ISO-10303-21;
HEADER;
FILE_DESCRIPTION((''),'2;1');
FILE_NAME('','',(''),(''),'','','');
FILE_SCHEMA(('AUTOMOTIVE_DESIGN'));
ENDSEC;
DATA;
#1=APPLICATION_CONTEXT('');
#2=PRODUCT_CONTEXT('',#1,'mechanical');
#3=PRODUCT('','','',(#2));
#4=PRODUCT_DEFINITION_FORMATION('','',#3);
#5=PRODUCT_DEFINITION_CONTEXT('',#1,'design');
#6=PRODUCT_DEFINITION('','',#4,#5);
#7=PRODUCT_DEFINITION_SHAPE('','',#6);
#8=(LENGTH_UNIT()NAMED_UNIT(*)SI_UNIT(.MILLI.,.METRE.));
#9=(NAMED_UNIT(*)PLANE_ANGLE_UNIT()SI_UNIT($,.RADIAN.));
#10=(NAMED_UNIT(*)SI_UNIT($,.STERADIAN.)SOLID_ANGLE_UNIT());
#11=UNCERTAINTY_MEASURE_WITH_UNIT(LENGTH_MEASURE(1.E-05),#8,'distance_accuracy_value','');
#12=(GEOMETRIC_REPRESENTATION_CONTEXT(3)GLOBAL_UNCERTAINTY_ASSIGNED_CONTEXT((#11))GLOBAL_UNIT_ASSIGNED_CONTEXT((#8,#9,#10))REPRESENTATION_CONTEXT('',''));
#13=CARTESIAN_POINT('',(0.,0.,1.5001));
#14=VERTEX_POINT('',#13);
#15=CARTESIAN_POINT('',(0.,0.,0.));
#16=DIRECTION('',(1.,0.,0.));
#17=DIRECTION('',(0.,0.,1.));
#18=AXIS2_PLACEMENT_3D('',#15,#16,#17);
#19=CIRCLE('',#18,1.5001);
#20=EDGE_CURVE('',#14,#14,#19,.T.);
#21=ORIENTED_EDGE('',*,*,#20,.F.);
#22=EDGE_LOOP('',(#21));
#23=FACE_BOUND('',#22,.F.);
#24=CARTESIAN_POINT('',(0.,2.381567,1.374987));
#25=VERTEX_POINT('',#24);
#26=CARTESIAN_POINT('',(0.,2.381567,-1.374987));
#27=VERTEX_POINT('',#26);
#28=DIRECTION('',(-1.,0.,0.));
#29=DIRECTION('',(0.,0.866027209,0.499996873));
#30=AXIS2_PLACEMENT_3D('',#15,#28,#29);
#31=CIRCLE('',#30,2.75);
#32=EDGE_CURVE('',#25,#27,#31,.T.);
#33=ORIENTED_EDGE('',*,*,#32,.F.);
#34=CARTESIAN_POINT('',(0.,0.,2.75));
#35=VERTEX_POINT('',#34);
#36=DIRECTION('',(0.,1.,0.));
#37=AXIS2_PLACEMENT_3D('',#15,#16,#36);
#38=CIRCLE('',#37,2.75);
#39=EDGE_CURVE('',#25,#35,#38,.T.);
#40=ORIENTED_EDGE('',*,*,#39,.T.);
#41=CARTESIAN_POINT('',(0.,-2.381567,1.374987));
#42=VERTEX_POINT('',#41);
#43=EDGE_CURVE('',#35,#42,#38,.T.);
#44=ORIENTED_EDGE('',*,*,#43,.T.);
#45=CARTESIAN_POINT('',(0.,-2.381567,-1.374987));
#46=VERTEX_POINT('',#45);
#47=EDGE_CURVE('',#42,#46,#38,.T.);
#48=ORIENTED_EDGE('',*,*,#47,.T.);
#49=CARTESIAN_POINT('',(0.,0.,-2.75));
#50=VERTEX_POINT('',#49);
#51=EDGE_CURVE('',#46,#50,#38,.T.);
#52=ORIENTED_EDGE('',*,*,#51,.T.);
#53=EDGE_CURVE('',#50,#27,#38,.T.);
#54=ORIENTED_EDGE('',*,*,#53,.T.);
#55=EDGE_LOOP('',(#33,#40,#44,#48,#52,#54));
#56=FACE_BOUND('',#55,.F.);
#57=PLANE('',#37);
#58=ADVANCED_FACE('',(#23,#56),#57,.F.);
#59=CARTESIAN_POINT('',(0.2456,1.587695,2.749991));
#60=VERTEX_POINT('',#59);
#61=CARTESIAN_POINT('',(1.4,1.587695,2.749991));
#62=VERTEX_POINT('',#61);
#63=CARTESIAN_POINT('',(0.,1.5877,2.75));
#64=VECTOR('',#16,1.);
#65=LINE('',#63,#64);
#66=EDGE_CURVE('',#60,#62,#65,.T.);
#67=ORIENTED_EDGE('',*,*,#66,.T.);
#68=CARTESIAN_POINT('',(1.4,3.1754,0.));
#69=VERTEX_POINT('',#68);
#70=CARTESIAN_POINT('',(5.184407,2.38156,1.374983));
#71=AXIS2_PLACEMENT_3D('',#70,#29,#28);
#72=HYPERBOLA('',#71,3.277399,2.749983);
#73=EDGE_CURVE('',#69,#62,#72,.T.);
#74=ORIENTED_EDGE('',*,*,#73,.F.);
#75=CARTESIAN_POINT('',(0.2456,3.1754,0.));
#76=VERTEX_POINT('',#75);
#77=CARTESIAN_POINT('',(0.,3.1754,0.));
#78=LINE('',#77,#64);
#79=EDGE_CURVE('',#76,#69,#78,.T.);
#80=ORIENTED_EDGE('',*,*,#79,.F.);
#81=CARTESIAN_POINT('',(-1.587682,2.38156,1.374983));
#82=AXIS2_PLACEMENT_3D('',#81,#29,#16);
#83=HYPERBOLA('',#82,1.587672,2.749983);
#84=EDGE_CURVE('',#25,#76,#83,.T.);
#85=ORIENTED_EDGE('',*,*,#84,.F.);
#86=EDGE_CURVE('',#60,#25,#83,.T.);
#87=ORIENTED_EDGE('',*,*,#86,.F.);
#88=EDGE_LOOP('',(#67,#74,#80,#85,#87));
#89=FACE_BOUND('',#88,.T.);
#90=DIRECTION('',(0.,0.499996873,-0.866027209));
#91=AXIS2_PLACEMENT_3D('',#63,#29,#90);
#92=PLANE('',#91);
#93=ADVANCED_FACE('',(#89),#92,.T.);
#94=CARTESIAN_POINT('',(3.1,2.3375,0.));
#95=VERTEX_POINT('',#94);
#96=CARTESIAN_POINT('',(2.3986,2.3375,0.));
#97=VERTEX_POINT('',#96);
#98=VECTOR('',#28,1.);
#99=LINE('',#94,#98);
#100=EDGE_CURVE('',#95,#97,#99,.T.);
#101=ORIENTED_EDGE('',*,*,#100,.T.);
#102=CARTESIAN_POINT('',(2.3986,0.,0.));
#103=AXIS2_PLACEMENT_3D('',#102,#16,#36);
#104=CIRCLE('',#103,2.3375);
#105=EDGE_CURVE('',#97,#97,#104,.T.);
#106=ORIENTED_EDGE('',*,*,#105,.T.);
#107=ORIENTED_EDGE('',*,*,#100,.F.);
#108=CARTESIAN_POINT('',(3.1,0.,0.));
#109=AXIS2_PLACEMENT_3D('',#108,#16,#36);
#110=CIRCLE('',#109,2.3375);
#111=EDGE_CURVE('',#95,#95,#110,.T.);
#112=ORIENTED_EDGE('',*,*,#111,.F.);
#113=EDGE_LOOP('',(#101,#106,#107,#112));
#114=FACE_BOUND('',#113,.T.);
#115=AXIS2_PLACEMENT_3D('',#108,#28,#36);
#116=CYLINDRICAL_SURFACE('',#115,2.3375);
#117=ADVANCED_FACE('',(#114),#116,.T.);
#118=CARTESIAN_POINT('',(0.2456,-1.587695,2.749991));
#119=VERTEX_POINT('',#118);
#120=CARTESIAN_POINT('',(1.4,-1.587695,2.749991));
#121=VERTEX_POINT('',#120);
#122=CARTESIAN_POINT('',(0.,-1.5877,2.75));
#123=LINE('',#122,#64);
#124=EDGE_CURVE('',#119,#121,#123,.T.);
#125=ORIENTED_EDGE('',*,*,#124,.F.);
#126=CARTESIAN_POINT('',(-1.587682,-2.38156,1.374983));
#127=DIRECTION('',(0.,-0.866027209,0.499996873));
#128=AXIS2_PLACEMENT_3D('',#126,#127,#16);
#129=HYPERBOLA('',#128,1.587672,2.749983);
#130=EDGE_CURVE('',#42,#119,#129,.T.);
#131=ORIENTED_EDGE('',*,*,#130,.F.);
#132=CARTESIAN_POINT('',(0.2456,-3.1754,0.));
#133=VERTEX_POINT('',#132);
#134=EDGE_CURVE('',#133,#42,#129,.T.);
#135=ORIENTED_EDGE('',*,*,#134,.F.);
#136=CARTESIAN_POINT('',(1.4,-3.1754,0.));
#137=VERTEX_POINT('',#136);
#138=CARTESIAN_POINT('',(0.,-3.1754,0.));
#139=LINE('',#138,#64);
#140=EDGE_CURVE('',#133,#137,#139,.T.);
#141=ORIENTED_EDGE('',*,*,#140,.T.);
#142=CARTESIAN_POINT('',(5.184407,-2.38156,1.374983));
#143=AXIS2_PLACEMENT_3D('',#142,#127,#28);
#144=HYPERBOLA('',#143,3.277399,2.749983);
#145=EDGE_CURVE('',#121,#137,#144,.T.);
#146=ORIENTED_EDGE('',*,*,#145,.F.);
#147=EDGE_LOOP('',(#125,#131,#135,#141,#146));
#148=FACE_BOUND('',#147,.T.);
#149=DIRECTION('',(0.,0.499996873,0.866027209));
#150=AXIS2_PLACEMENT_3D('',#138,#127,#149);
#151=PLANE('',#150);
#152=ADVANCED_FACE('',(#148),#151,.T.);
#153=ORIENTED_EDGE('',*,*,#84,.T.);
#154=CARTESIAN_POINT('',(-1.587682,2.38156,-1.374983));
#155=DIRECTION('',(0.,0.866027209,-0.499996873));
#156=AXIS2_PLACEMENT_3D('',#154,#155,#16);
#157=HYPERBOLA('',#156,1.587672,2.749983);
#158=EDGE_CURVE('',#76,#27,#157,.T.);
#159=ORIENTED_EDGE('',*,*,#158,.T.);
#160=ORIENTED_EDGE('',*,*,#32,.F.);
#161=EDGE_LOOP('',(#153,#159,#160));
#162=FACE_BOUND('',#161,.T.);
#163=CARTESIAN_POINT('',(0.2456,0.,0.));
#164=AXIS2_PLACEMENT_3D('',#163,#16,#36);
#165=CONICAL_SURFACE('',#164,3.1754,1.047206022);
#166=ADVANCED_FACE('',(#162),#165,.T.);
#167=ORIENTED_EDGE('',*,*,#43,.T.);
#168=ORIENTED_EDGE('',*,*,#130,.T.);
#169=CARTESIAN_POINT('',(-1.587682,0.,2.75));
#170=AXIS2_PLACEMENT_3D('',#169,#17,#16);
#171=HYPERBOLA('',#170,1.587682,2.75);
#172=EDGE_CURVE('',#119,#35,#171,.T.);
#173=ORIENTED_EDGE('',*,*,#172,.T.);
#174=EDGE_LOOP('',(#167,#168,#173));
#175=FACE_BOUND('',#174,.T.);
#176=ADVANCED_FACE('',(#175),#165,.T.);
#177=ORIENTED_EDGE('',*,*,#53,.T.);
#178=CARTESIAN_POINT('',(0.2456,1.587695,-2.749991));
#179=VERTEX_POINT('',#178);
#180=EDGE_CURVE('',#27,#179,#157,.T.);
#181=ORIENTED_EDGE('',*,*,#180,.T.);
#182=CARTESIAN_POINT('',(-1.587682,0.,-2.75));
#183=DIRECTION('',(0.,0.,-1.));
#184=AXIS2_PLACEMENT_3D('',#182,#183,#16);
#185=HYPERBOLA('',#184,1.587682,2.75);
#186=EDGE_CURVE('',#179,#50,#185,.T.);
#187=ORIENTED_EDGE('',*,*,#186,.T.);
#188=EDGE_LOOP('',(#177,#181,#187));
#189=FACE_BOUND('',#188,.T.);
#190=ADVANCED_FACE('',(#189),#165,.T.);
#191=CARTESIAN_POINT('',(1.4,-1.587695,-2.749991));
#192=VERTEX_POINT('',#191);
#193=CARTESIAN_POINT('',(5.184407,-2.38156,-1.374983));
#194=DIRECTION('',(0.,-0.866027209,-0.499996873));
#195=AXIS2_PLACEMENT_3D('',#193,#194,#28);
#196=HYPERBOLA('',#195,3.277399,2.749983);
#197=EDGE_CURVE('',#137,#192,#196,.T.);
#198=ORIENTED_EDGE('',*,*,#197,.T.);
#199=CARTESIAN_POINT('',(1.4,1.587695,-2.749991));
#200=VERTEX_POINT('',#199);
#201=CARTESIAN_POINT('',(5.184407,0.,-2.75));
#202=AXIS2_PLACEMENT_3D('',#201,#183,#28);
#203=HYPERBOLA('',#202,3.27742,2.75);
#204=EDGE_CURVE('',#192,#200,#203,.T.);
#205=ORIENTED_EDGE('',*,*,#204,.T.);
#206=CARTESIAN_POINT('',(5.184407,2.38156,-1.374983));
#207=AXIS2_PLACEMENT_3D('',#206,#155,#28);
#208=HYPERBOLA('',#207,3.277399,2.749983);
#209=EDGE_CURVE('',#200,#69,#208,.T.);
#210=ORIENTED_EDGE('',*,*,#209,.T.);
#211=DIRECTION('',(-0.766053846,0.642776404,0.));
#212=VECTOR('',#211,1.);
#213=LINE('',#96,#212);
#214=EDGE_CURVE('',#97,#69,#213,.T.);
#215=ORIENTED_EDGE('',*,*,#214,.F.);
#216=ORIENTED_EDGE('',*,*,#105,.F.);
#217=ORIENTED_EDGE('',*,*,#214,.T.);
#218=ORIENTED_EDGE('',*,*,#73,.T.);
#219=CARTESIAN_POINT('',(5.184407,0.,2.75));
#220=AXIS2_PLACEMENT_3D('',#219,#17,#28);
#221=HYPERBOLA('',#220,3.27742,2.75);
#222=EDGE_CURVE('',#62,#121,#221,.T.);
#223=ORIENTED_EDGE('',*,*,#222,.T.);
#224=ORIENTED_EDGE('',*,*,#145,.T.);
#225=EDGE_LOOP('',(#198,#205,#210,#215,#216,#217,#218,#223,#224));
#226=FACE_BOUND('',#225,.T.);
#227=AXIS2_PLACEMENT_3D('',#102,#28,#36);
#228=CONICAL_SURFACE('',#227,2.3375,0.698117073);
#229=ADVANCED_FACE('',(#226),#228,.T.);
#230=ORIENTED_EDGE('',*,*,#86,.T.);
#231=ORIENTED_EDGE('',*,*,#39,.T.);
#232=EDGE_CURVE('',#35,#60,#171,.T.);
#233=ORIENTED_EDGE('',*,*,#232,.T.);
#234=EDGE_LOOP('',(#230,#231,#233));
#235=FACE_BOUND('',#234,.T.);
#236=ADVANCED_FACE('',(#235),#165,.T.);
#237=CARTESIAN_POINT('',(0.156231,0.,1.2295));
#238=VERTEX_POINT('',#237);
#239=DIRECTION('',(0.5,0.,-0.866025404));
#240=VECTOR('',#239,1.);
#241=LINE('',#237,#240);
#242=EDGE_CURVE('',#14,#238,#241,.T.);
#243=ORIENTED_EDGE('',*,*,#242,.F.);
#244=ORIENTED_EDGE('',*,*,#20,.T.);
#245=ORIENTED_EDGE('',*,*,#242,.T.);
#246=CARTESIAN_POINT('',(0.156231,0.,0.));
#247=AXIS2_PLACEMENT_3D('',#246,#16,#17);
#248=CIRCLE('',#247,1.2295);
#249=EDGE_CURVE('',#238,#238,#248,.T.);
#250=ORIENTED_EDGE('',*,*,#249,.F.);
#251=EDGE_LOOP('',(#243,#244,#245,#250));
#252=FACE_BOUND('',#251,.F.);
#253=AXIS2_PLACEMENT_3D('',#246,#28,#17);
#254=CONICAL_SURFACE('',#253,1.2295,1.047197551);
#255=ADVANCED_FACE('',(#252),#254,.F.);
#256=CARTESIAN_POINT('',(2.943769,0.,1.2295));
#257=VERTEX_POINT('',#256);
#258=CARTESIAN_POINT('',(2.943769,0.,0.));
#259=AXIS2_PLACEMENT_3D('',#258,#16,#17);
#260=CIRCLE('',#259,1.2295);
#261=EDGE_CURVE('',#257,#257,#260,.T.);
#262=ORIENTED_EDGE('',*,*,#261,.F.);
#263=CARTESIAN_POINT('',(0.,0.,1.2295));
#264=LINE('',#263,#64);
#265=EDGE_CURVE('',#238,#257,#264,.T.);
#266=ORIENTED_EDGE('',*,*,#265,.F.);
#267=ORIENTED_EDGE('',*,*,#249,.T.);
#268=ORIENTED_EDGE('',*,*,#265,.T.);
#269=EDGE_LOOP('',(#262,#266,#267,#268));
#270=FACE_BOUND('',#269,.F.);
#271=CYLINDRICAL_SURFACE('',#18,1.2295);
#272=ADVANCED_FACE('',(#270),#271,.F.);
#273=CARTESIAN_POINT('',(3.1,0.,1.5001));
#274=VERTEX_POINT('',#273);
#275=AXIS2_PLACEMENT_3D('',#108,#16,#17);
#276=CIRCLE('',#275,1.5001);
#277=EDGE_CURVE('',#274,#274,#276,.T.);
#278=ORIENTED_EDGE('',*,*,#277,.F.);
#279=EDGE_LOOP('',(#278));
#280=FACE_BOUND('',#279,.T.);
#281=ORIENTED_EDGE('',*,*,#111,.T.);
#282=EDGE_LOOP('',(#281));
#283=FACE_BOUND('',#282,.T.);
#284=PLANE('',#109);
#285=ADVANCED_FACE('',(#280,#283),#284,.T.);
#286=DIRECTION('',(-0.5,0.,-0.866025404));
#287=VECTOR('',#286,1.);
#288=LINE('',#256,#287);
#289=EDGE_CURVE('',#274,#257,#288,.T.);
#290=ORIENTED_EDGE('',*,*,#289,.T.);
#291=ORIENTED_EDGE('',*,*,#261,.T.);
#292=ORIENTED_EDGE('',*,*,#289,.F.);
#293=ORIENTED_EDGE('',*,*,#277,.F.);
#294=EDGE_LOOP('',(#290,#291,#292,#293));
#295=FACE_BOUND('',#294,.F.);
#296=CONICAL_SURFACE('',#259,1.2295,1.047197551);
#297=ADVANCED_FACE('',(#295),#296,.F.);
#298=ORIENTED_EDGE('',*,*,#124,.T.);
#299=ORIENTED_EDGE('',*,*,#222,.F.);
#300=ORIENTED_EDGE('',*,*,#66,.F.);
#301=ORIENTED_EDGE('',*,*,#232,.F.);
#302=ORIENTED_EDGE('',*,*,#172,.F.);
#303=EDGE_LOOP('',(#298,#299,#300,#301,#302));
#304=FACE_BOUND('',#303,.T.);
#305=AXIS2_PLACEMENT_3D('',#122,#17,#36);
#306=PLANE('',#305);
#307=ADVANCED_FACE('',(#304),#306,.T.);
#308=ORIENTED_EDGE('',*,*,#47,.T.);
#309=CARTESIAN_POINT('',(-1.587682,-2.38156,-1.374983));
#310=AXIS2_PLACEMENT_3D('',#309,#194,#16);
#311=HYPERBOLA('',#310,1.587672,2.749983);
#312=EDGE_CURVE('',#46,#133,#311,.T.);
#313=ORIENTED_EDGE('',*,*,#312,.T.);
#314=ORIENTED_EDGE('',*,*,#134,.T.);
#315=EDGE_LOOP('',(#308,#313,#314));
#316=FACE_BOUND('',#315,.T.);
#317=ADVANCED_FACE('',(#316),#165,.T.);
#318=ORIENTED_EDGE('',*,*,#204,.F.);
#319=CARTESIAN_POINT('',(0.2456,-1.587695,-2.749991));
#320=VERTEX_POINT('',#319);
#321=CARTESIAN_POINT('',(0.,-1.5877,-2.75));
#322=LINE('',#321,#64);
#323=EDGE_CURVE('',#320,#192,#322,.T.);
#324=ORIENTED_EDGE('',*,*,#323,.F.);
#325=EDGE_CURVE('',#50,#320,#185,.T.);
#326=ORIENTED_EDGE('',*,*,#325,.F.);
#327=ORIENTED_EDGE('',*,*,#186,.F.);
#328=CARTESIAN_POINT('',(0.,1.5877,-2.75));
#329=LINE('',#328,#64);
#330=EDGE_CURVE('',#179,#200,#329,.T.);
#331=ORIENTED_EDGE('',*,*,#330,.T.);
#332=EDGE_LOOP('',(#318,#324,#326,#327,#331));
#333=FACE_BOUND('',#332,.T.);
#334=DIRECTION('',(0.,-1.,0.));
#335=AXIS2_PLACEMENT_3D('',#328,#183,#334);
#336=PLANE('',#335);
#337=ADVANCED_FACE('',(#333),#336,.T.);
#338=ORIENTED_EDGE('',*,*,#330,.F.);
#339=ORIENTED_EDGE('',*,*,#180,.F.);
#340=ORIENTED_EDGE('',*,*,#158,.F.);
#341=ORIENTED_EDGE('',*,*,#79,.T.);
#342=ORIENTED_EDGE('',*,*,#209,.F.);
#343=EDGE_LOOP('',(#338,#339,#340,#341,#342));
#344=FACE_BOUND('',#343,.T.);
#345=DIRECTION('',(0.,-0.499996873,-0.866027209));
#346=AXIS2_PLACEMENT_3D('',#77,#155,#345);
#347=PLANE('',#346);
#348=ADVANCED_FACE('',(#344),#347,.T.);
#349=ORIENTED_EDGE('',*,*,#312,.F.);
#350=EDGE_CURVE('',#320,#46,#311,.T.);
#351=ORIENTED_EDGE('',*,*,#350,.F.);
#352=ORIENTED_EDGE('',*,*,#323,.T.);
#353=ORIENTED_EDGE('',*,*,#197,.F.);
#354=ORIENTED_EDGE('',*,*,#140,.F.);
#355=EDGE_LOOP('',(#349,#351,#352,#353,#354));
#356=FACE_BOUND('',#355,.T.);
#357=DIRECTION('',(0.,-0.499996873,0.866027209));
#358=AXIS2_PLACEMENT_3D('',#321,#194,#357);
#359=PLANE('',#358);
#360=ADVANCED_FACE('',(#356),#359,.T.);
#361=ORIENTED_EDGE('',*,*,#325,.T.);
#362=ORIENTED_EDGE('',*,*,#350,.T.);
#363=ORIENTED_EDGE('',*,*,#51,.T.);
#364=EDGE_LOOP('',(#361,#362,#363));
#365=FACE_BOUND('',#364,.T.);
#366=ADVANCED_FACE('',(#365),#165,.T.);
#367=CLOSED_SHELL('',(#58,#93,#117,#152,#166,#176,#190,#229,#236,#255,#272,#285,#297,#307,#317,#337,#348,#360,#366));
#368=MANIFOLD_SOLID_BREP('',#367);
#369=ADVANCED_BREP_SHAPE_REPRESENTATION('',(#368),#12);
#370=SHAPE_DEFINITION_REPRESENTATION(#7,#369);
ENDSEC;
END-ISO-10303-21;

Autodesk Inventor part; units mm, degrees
ref_plane "YZ Plane" through (0, 0, 0) normal (1, 0, 0) x (0, 1, 0)
ref_plane "XZ Plane" through (0, 0, 0) normal (0, 1, 0) x (-1, 0, 0)
sketch "Sketch1" plane through (0, 0, 0) normal (1, 0, 0) x (0, 1, 0)
  line L0 (-3.1754, 0) -> (-1.5877, 2.75)
  line L1 (-1.5877, 2.75) -> (1.5877, 2.75)
  line L2 (1.5877, 2.75) -> (3.1754, 0)
  line L3 (3.1754, 0) -> (1.5877, -2.75)
  line L4 (1.5877, -2.75) -> (-1.5877, -2.75)
  line L5 (-1.5877, -2.75) -> (-3.1754, 0)
  point P0 (0, 0)
  point P1 (0, 0)
  dimension "d0" = 6.3509
extrude "Body" add sketch "Sketch1" along normal blind 3.1
sketch "Sketch2" plane through (0, 0, 0) normal (-1, 0, 0) x (0, 0, 1)
  line L0 (0, -4.4456) -> (0, 4.4456) projected
  line L1 (-3.85, 0) -> (3.85, 0) projected
  point P0 (0, 0)
hole "Thread" at (0, 0, 0) direction (1, 0, 0) diameter 2.459 end through all thread size "M3x0.5" class "6H" standard "ANSI Metric M Profile"
chamfer "Chamfer1" distance 0.2706 angle 30 1 edges at (0, 0, -1.2295) measured on face at (0, -1.925, -1.1495)
chamfer "Chamfer2" distance 0.2706 angle 30 1 edges at (3.1, 0, -1.2295) measured on face at (3.1, -1.925, -1.1495)
sketch "Sketch3" plane through (0, 0, 0) normal (0, 0, 1) x (1, 0, 0)
  line L0 (0, 1.5877) -> (0, 3.1754) projected
  line L1 (0, 3.1754) -> (3.1, 3.1754) projected
  line L2 (3.1, 1.5877) -> (3.1, 3.1754) projected
  line L3 (-0.62, 0) -> (3.72, 0) projected
  line L4 (0.2456, 3.1754) -> (0, 2.75)
  line L5 (3.1, 2.3375) -> (2.3986, 2.3375)
  line L6 (2.3986, 2.3375) -> (1.4, 3.1754)
  dimension "d3" = 30
  dimension "d5" = 5.5
  dimension "d6" = 4.675
  dimension "d8" = 50
  dimension "d9" = 1.4
revolve "Chamfer3" cut sketch "Sketch3" angle 360 about axis through (-10, 0, 0) along (1, 0, 0)
ref_plane "Work Plane1" through (8.9551, 0, 0) normal (0, 0, 1) x (-1, 0, 0)
equation "\"d0\" = 1.1547 * SW"
equation "\"d1\" = KOH"
equation "\"d3\" = ANG1"
equation "\"d5\" = SW0"
equation "\"d6\" = SW1"
equation "\"d8\" = ANG2"
equation "\"d9\" = KOH1"
equation "\"d10\" = -0.5 * GD1 + 0.5 * NND"
equation "\"d39\" = -0.5 * GD1 + 0.5 * NND"
equation "\"d12\" = -0.5 * GD1 + 0.5 * NND"
equation "\"d40\" = -0.5 * GD1 + 0.5 * NND"
equation "\"ANG1\" = 30deg"
equation "\"ANG2\" = 50deg"
equation "\"NND\" = 3"
equation "\"KOH\" = 3.1"
equation "\"SW\" = 5.5"
equation "\"SW0\" = SW"
equation "\"SW1\" = 0.85 * SW"
equation "\"KOH1\" = 1.4"
equation "\"GUL\" = 0.541266 * PTC"
equation "\"THREADDIA\" = 3"
equation "\"TOA\" = 30deg"
equation "\"PTC\" = 0.5"
equation "\"E0\" = 1.155 * SW"
equation "\"GAL\" = 0.541266 * PTC"
equation "\"GD1\" = 2.458734"
properties part number "Nut M3 Torque nickel plated" material "Steel, Mild"
